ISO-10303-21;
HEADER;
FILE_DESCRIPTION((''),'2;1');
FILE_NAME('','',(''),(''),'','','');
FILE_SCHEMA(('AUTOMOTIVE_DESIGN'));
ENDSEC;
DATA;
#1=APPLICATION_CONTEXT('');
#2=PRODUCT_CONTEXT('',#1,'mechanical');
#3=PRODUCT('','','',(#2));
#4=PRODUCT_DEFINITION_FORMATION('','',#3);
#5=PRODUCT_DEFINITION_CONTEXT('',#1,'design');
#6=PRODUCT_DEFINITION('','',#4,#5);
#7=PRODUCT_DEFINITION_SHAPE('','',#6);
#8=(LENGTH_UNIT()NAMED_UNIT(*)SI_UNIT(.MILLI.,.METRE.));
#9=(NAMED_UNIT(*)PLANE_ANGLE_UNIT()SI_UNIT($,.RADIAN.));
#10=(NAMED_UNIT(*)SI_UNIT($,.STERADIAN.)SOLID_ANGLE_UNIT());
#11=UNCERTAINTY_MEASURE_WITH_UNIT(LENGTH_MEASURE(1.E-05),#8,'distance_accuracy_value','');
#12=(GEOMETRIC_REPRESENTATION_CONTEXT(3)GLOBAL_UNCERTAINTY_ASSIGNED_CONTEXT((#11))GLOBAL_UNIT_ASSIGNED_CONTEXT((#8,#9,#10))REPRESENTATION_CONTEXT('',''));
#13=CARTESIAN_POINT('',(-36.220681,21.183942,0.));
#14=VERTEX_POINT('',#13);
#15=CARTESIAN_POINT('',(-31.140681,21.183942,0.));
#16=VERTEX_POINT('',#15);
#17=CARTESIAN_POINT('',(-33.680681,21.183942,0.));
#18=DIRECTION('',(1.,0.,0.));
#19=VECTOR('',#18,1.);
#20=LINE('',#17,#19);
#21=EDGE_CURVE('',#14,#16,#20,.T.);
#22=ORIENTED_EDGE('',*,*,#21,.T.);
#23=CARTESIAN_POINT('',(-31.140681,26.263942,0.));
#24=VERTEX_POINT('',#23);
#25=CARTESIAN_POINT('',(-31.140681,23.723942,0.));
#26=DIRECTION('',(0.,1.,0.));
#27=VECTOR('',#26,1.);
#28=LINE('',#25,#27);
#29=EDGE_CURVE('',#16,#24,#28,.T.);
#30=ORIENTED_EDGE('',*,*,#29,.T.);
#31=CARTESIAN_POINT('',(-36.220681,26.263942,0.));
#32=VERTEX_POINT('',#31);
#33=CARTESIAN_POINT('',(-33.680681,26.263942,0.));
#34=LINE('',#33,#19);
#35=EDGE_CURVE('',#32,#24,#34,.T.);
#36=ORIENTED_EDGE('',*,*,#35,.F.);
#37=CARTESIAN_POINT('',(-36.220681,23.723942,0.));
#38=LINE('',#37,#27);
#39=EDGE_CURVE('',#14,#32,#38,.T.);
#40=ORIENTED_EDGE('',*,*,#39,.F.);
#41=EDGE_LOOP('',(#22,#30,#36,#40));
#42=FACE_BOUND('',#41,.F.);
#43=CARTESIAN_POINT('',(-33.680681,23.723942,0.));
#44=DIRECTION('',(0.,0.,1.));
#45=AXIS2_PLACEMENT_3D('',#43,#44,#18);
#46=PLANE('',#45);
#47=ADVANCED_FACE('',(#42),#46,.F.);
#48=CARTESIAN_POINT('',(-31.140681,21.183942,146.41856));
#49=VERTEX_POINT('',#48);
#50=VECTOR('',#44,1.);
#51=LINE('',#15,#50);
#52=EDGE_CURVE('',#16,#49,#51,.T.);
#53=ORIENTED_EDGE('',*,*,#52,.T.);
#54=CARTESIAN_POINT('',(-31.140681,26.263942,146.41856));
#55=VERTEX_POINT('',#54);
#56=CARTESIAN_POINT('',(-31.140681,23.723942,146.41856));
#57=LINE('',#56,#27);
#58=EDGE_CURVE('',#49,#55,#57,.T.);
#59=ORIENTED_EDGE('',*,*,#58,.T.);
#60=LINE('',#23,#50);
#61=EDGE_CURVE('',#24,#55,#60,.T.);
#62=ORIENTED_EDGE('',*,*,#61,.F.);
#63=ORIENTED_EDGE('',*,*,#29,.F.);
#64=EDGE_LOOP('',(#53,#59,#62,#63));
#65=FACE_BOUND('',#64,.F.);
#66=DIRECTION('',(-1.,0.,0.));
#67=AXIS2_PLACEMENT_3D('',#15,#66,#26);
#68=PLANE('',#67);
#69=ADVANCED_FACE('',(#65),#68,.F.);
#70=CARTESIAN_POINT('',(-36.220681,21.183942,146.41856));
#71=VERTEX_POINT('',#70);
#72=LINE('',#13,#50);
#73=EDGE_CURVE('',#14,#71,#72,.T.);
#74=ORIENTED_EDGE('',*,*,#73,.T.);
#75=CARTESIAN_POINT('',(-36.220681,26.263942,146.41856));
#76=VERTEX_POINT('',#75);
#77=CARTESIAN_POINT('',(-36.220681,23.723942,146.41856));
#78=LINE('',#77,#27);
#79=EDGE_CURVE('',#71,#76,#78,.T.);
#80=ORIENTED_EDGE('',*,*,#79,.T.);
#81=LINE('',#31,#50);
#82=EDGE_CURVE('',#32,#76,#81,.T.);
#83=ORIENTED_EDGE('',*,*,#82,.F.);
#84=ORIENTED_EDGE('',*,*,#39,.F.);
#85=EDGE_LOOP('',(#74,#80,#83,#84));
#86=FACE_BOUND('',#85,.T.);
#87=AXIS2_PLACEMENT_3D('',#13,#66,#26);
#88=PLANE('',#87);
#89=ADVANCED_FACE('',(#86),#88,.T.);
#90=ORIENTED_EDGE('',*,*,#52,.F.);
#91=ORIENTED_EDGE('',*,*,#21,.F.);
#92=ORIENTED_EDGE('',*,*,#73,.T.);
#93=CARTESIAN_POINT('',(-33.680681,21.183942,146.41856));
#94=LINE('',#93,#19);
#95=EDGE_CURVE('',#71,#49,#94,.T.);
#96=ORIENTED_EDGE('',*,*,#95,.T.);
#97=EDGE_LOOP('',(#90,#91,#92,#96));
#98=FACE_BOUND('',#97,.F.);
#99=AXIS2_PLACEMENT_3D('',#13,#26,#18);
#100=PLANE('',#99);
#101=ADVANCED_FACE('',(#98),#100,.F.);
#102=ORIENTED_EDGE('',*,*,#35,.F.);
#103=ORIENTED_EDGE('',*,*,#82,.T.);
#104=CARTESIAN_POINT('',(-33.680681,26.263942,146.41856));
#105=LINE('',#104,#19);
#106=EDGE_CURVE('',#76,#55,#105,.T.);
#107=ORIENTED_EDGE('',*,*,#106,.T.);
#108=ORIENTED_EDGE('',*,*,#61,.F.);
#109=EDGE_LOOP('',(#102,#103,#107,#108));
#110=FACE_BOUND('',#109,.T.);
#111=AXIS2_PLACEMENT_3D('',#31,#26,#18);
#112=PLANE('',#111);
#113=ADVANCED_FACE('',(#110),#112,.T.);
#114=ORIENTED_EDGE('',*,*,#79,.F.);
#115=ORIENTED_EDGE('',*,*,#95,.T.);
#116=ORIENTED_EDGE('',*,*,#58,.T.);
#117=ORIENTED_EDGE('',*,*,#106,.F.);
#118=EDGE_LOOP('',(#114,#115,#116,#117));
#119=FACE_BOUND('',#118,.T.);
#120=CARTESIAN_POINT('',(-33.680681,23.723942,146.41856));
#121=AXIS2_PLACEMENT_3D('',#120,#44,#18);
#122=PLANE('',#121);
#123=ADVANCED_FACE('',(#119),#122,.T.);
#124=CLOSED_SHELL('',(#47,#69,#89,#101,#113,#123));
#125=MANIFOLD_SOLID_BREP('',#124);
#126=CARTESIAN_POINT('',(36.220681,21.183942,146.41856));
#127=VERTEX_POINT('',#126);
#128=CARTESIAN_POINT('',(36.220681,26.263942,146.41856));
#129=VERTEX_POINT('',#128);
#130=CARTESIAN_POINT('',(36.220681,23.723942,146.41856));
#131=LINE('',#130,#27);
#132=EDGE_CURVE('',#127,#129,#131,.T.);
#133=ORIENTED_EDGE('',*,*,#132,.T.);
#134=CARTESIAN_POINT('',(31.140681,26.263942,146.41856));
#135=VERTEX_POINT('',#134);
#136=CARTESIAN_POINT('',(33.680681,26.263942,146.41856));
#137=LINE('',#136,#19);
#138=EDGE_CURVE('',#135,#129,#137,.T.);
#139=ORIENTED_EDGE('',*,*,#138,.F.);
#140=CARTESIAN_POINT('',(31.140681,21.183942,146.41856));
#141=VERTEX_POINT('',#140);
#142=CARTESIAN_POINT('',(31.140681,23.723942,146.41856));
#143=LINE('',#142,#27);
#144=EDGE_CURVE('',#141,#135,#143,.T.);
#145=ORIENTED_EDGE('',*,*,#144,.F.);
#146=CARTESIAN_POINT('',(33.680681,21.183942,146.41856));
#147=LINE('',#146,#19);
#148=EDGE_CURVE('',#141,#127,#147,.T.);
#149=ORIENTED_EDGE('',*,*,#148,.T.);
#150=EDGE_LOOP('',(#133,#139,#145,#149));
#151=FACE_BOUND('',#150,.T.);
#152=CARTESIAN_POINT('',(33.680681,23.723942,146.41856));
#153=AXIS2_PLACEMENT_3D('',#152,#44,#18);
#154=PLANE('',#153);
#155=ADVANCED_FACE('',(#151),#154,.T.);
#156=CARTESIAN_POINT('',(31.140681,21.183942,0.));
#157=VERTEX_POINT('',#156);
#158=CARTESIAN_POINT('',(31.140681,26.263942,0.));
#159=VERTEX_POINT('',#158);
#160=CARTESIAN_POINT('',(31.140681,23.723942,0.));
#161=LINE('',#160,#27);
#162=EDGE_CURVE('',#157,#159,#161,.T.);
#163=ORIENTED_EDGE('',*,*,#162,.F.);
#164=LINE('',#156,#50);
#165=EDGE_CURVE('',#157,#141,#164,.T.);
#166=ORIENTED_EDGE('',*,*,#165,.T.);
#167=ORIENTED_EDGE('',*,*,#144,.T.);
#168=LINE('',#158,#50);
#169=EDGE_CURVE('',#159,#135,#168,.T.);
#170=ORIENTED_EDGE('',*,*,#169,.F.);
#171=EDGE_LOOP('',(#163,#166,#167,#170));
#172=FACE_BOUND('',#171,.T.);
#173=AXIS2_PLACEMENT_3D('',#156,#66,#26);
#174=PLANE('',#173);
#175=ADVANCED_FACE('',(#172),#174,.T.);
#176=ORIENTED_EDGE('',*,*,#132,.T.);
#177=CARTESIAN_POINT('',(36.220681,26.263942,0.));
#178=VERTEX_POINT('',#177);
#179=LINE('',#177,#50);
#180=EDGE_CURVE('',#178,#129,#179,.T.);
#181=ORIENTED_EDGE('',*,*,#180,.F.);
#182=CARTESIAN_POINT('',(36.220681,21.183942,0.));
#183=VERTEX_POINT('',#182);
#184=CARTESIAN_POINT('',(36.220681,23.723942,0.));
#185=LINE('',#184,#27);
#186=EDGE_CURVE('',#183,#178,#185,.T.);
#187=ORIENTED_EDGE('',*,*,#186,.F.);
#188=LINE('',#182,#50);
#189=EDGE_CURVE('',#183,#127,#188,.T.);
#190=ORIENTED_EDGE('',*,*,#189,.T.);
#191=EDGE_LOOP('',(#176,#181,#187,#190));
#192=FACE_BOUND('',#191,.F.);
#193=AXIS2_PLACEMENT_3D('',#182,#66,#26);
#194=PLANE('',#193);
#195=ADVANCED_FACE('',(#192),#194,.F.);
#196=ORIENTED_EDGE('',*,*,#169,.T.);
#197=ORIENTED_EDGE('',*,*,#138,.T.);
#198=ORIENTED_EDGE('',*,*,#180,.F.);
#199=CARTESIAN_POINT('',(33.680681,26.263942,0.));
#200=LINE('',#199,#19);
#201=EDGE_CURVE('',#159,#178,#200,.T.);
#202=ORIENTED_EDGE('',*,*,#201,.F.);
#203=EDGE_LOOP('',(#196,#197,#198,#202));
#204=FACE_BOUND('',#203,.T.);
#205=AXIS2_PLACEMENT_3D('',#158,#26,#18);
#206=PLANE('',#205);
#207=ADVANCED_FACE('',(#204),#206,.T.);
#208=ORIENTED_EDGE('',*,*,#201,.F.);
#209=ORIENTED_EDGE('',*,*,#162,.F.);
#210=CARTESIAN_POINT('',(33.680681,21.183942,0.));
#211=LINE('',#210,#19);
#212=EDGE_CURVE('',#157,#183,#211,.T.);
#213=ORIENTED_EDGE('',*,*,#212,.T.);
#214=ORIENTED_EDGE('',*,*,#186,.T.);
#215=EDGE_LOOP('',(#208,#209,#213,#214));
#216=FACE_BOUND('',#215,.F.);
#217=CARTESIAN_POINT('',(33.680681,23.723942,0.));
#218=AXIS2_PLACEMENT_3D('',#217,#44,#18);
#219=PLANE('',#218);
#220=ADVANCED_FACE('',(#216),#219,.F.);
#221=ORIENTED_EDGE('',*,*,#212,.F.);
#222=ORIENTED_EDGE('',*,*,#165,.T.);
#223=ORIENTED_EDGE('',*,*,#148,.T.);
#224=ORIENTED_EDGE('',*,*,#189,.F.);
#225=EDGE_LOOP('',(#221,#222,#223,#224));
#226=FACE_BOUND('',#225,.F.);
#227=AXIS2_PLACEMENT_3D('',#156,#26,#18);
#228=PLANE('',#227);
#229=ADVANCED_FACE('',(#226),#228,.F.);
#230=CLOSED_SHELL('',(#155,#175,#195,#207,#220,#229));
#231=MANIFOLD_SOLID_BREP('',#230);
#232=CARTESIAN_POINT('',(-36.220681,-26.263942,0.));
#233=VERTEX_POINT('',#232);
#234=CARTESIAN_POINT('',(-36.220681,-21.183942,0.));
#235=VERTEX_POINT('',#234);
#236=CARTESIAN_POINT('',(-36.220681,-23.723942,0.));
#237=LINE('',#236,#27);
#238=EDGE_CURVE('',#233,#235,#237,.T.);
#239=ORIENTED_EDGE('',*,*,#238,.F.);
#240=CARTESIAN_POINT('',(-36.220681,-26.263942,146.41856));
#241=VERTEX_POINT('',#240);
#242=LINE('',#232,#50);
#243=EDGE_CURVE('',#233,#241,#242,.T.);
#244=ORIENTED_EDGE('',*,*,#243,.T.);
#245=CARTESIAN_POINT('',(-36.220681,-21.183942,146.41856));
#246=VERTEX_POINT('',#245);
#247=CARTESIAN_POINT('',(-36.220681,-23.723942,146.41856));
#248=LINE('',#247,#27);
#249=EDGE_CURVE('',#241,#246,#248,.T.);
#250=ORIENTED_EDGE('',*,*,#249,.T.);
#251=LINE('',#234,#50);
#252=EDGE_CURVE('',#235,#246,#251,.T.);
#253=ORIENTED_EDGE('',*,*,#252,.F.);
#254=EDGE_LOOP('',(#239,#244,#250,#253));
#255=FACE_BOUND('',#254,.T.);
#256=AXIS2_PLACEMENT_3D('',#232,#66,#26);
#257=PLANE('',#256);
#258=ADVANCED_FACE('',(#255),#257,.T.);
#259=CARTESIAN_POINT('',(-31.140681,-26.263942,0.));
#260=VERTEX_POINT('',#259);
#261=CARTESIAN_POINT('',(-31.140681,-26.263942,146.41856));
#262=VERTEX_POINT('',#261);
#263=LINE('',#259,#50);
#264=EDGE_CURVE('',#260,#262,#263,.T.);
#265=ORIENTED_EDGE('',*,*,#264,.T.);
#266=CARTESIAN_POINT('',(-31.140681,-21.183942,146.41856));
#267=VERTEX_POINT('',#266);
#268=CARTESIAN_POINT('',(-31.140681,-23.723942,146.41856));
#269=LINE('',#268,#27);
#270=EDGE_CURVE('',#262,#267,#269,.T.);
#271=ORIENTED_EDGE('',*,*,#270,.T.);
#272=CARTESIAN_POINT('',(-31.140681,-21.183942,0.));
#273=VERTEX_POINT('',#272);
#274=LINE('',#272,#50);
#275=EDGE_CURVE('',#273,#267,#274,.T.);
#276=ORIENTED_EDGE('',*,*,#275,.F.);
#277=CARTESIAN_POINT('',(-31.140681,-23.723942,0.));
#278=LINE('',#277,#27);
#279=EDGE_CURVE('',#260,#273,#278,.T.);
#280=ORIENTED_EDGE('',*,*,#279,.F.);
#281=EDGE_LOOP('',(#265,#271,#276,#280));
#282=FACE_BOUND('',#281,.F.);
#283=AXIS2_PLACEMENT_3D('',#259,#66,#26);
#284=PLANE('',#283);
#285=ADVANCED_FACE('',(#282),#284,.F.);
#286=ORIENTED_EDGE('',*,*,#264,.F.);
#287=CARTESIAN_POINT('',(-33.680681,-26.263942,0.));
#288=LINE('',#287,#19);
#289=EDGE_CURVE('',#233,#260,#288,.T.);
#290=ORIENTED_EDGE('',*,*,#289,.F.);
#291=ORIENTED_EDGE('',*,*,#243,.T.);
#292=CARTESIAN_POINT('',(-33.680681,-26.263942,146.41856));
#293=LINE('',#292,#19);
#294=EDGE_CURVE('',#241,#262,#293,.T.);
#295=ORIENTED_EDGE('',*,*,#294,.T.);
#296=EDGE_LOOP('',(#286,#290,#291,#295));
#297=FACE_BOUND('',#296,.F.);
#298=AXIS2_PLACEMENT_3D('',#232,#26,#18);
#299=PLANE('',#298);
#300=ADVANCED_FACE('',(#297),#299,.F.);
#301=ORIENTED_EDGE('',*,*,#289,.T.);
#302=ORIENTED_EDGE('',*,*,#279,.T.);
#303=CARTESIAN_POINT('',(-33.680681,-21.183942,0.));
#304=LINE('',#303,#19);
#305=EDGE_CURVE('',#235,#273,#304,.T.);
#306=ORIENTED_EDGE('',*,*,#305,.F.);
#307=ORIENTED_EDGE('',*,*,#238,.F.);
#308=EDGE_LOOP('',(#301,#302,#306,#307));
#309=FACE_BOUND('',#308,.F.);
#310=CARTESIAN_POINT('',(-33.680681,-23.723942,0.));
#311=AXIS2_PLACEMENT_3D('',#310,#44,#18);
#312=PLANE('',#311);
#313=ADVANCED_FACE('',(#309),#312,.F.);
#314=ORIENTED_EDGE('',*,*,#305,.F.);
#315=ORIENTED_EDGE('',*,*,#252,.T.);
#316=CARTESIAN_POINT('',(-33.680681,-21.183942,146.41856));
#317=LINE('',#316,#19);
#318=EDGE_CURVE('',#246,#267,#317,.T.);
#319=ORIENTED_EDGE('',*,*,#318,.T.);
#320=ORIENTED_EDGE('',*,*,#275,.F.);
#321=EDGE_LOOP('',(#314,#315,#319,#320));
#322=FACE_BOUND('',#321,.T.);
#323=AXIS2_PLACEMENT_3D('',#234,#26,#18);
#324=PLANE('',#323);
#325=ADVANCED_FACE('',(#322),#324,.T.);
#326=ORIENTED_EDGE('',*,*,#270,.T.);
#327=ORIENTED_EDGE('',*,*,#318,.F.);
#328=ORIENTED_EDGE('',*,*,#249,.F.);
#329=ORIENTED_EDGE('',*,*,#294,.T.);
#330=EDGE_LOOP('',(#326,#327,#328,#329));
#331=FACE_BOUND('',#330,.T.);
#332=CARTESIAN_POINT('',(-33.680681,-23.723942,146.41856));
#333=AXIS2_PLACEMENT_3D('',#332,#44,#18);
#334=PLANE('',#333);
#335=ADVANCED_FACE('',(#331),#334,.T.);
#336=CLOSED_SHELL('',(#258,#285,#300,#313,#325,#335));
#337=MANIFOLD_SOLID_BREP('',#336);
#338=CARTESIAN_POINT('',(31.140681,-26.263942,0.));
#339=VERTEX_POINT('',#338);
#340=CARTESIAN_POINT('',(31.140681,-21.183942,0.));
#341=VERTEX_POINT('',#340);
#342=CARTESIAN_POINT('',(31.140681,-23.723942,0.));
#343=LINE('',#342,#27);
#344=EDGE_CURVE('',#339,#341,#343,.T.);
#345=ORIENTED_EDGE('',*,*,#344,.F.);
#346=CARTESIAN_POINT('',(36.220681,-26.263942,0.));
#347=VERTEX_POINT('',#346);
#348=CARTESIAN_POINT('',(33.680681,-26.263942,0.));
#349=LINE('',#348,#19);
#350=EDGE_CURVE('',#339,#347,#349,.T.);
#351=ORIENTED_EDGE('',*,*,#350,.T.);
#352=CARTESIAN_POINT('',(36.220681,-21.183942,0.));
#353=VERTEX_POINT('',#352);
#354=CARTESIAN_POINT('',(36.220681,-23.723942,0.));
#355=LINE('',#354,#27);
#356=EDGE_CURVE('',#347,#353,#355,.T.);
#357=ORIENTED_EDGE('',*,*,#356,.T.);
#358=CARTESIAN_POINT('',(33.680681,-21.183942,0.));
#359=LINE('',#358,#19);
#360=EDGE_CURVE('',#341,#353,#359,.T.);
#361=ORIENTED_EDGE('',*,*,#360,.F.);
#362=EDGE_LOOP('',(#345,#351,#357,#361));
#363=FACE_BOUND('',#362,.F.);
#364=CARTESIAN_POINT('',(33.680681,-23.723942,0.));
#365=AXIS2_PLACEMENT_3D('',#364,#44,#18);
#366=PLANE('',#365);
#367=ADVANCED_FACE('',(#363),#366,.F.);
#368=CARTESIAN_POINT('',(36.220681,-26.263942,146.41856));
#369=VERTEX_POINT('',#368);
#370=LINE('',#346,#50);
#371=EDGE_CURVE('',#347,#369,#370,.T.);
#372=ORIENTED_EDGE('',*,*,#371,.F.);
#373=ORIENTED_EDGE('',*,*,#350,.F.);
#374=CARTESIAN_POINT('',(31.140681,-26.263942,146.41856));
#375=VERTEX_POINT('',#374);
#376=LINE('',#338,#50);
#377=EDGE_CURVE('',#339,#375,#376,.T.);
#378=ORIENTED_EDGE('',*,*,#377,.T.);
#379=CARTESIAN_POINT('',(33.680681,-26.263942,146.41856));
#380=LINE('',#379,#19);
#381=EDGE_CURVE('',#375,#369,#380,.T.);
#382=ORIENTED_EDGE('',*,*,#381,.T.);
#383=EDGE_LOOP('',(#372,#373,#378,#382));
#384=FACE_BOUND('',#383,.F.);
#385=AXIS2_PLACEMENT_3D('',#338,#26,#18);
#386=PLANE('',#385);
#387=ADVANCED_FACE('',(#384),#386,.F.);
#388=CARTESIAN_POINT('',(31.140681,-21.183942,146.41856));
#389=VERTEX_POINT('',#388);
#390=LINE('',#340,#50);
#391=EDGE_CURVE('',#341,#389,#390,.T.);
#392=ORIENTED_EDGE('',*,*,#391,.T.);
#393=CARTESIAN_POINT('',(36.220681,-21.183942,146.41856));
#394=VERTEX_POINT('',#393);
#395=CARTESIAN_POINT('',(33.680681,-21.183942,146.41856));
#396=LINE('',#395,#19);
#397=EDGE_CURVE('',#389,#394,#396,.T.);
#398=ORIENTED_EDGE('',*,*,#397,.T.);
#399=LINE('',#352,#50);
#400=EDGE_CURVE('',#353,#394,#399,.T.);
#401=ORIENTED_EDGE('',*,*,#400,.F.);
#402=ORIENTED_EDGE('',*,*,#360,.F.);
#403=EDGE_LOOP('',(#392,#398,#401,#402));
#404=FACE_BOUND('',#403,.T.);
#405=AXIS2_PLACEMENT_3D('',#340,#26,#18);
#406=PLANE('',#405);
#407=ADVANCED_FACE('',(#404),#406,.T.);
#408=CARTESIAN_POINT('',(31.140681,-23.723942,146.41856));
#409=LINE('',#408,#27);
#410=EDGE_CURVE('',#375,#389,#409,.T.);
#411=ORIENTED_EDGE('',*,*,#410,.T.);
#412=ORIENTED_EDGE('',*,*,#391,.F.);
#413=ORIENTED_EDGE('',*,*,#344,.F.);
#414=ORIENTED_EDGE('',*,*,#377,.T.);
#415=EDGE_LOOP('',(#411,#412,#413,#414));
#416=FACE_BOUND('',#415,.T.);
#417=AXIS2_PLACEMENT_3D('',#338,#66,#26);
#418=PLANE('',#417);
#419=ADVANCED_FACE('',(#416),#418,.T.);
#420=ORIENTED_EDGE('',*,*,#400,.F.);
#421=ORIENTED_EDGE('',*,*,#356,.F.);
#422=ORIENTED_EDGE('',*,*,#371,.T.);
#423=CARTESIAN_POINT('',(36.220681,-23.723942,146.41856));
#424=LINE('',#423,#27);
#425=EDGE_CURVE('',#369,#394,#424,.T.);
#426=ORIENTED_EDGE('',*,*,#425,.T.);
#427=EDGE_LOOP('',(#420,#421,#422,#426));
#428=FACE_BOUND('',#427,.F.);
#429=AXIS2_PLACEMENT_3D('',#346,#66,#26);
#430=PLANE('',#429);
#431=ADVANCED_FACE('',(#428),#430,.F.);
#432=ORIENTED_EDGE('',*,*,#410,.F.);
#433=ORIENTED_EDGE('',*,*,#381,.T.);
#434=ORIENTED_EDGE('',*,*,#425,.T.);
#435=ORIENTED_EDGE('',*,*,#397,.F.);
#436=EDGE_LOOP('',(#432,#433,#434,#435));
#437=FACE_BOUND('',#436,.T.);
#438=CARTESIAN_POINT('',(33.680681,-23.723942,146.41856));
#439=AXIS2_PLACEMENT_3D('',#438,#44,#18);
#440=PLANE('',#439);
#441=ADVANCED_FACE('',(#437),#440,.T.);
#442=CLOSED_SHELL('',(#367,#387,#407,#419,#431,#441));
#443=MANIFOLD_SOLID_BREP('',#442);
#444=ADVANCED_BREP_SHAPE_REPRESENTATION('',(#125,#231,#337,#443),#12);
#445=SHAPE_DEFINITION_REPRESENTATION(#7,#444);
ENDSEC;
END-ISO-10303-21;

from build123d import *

# Parameters (mm, degrees)
F0_W     = 5.08
F0_H     = 5.08
F1_DEPTH = 146.41856


# Not quite as in the source:
# - the program builds the solid bodies; features that only make, move or delete a surface that nothing else refers to are left out


with BuildPart() as f1:
    # F0 (on Top) → F1 (new body)
    with BuildSketch(Plane.XY):
        with Locations((-33.6806811392, 23.723941824)):
            Rectangle(F0_W, F0_H)
    extrude(amount=F1_DEPTH)


with BuildPart() as f1b:
    # F0 (on Top) → F1, piece 2 (new body)
    with BuildSketch(Plane.XY):
        with Locations((-33.6806811392, -23.723941824)):
            Rectangle(F0_W, F0_H)
    extrude(amount=F1_DEPTH)


with BuildPart() as f1c:
    # F0 (on Top) → F1, piece 3 (new body)
    with BuildSketch(Plane.XY):
        with Locations((33.6806811392, -23.723941824)):
            Rectangle(F0_W, F0_H)
    extrude(amount=F1_DEPTH)


with BuildPart() as f1d:
    # F0 (on Top) → F1, piece 4 (new body)
    with BuildSketch(Plane.XY):
        with Locations((33.6806811392, 23.723941824)):
            Rectangle(F0_W, F0_H)
    extrude(amount=F1_DEPTH)


solid = Compound([f1.part, f1b.part, f1c.part, f1d.part])
